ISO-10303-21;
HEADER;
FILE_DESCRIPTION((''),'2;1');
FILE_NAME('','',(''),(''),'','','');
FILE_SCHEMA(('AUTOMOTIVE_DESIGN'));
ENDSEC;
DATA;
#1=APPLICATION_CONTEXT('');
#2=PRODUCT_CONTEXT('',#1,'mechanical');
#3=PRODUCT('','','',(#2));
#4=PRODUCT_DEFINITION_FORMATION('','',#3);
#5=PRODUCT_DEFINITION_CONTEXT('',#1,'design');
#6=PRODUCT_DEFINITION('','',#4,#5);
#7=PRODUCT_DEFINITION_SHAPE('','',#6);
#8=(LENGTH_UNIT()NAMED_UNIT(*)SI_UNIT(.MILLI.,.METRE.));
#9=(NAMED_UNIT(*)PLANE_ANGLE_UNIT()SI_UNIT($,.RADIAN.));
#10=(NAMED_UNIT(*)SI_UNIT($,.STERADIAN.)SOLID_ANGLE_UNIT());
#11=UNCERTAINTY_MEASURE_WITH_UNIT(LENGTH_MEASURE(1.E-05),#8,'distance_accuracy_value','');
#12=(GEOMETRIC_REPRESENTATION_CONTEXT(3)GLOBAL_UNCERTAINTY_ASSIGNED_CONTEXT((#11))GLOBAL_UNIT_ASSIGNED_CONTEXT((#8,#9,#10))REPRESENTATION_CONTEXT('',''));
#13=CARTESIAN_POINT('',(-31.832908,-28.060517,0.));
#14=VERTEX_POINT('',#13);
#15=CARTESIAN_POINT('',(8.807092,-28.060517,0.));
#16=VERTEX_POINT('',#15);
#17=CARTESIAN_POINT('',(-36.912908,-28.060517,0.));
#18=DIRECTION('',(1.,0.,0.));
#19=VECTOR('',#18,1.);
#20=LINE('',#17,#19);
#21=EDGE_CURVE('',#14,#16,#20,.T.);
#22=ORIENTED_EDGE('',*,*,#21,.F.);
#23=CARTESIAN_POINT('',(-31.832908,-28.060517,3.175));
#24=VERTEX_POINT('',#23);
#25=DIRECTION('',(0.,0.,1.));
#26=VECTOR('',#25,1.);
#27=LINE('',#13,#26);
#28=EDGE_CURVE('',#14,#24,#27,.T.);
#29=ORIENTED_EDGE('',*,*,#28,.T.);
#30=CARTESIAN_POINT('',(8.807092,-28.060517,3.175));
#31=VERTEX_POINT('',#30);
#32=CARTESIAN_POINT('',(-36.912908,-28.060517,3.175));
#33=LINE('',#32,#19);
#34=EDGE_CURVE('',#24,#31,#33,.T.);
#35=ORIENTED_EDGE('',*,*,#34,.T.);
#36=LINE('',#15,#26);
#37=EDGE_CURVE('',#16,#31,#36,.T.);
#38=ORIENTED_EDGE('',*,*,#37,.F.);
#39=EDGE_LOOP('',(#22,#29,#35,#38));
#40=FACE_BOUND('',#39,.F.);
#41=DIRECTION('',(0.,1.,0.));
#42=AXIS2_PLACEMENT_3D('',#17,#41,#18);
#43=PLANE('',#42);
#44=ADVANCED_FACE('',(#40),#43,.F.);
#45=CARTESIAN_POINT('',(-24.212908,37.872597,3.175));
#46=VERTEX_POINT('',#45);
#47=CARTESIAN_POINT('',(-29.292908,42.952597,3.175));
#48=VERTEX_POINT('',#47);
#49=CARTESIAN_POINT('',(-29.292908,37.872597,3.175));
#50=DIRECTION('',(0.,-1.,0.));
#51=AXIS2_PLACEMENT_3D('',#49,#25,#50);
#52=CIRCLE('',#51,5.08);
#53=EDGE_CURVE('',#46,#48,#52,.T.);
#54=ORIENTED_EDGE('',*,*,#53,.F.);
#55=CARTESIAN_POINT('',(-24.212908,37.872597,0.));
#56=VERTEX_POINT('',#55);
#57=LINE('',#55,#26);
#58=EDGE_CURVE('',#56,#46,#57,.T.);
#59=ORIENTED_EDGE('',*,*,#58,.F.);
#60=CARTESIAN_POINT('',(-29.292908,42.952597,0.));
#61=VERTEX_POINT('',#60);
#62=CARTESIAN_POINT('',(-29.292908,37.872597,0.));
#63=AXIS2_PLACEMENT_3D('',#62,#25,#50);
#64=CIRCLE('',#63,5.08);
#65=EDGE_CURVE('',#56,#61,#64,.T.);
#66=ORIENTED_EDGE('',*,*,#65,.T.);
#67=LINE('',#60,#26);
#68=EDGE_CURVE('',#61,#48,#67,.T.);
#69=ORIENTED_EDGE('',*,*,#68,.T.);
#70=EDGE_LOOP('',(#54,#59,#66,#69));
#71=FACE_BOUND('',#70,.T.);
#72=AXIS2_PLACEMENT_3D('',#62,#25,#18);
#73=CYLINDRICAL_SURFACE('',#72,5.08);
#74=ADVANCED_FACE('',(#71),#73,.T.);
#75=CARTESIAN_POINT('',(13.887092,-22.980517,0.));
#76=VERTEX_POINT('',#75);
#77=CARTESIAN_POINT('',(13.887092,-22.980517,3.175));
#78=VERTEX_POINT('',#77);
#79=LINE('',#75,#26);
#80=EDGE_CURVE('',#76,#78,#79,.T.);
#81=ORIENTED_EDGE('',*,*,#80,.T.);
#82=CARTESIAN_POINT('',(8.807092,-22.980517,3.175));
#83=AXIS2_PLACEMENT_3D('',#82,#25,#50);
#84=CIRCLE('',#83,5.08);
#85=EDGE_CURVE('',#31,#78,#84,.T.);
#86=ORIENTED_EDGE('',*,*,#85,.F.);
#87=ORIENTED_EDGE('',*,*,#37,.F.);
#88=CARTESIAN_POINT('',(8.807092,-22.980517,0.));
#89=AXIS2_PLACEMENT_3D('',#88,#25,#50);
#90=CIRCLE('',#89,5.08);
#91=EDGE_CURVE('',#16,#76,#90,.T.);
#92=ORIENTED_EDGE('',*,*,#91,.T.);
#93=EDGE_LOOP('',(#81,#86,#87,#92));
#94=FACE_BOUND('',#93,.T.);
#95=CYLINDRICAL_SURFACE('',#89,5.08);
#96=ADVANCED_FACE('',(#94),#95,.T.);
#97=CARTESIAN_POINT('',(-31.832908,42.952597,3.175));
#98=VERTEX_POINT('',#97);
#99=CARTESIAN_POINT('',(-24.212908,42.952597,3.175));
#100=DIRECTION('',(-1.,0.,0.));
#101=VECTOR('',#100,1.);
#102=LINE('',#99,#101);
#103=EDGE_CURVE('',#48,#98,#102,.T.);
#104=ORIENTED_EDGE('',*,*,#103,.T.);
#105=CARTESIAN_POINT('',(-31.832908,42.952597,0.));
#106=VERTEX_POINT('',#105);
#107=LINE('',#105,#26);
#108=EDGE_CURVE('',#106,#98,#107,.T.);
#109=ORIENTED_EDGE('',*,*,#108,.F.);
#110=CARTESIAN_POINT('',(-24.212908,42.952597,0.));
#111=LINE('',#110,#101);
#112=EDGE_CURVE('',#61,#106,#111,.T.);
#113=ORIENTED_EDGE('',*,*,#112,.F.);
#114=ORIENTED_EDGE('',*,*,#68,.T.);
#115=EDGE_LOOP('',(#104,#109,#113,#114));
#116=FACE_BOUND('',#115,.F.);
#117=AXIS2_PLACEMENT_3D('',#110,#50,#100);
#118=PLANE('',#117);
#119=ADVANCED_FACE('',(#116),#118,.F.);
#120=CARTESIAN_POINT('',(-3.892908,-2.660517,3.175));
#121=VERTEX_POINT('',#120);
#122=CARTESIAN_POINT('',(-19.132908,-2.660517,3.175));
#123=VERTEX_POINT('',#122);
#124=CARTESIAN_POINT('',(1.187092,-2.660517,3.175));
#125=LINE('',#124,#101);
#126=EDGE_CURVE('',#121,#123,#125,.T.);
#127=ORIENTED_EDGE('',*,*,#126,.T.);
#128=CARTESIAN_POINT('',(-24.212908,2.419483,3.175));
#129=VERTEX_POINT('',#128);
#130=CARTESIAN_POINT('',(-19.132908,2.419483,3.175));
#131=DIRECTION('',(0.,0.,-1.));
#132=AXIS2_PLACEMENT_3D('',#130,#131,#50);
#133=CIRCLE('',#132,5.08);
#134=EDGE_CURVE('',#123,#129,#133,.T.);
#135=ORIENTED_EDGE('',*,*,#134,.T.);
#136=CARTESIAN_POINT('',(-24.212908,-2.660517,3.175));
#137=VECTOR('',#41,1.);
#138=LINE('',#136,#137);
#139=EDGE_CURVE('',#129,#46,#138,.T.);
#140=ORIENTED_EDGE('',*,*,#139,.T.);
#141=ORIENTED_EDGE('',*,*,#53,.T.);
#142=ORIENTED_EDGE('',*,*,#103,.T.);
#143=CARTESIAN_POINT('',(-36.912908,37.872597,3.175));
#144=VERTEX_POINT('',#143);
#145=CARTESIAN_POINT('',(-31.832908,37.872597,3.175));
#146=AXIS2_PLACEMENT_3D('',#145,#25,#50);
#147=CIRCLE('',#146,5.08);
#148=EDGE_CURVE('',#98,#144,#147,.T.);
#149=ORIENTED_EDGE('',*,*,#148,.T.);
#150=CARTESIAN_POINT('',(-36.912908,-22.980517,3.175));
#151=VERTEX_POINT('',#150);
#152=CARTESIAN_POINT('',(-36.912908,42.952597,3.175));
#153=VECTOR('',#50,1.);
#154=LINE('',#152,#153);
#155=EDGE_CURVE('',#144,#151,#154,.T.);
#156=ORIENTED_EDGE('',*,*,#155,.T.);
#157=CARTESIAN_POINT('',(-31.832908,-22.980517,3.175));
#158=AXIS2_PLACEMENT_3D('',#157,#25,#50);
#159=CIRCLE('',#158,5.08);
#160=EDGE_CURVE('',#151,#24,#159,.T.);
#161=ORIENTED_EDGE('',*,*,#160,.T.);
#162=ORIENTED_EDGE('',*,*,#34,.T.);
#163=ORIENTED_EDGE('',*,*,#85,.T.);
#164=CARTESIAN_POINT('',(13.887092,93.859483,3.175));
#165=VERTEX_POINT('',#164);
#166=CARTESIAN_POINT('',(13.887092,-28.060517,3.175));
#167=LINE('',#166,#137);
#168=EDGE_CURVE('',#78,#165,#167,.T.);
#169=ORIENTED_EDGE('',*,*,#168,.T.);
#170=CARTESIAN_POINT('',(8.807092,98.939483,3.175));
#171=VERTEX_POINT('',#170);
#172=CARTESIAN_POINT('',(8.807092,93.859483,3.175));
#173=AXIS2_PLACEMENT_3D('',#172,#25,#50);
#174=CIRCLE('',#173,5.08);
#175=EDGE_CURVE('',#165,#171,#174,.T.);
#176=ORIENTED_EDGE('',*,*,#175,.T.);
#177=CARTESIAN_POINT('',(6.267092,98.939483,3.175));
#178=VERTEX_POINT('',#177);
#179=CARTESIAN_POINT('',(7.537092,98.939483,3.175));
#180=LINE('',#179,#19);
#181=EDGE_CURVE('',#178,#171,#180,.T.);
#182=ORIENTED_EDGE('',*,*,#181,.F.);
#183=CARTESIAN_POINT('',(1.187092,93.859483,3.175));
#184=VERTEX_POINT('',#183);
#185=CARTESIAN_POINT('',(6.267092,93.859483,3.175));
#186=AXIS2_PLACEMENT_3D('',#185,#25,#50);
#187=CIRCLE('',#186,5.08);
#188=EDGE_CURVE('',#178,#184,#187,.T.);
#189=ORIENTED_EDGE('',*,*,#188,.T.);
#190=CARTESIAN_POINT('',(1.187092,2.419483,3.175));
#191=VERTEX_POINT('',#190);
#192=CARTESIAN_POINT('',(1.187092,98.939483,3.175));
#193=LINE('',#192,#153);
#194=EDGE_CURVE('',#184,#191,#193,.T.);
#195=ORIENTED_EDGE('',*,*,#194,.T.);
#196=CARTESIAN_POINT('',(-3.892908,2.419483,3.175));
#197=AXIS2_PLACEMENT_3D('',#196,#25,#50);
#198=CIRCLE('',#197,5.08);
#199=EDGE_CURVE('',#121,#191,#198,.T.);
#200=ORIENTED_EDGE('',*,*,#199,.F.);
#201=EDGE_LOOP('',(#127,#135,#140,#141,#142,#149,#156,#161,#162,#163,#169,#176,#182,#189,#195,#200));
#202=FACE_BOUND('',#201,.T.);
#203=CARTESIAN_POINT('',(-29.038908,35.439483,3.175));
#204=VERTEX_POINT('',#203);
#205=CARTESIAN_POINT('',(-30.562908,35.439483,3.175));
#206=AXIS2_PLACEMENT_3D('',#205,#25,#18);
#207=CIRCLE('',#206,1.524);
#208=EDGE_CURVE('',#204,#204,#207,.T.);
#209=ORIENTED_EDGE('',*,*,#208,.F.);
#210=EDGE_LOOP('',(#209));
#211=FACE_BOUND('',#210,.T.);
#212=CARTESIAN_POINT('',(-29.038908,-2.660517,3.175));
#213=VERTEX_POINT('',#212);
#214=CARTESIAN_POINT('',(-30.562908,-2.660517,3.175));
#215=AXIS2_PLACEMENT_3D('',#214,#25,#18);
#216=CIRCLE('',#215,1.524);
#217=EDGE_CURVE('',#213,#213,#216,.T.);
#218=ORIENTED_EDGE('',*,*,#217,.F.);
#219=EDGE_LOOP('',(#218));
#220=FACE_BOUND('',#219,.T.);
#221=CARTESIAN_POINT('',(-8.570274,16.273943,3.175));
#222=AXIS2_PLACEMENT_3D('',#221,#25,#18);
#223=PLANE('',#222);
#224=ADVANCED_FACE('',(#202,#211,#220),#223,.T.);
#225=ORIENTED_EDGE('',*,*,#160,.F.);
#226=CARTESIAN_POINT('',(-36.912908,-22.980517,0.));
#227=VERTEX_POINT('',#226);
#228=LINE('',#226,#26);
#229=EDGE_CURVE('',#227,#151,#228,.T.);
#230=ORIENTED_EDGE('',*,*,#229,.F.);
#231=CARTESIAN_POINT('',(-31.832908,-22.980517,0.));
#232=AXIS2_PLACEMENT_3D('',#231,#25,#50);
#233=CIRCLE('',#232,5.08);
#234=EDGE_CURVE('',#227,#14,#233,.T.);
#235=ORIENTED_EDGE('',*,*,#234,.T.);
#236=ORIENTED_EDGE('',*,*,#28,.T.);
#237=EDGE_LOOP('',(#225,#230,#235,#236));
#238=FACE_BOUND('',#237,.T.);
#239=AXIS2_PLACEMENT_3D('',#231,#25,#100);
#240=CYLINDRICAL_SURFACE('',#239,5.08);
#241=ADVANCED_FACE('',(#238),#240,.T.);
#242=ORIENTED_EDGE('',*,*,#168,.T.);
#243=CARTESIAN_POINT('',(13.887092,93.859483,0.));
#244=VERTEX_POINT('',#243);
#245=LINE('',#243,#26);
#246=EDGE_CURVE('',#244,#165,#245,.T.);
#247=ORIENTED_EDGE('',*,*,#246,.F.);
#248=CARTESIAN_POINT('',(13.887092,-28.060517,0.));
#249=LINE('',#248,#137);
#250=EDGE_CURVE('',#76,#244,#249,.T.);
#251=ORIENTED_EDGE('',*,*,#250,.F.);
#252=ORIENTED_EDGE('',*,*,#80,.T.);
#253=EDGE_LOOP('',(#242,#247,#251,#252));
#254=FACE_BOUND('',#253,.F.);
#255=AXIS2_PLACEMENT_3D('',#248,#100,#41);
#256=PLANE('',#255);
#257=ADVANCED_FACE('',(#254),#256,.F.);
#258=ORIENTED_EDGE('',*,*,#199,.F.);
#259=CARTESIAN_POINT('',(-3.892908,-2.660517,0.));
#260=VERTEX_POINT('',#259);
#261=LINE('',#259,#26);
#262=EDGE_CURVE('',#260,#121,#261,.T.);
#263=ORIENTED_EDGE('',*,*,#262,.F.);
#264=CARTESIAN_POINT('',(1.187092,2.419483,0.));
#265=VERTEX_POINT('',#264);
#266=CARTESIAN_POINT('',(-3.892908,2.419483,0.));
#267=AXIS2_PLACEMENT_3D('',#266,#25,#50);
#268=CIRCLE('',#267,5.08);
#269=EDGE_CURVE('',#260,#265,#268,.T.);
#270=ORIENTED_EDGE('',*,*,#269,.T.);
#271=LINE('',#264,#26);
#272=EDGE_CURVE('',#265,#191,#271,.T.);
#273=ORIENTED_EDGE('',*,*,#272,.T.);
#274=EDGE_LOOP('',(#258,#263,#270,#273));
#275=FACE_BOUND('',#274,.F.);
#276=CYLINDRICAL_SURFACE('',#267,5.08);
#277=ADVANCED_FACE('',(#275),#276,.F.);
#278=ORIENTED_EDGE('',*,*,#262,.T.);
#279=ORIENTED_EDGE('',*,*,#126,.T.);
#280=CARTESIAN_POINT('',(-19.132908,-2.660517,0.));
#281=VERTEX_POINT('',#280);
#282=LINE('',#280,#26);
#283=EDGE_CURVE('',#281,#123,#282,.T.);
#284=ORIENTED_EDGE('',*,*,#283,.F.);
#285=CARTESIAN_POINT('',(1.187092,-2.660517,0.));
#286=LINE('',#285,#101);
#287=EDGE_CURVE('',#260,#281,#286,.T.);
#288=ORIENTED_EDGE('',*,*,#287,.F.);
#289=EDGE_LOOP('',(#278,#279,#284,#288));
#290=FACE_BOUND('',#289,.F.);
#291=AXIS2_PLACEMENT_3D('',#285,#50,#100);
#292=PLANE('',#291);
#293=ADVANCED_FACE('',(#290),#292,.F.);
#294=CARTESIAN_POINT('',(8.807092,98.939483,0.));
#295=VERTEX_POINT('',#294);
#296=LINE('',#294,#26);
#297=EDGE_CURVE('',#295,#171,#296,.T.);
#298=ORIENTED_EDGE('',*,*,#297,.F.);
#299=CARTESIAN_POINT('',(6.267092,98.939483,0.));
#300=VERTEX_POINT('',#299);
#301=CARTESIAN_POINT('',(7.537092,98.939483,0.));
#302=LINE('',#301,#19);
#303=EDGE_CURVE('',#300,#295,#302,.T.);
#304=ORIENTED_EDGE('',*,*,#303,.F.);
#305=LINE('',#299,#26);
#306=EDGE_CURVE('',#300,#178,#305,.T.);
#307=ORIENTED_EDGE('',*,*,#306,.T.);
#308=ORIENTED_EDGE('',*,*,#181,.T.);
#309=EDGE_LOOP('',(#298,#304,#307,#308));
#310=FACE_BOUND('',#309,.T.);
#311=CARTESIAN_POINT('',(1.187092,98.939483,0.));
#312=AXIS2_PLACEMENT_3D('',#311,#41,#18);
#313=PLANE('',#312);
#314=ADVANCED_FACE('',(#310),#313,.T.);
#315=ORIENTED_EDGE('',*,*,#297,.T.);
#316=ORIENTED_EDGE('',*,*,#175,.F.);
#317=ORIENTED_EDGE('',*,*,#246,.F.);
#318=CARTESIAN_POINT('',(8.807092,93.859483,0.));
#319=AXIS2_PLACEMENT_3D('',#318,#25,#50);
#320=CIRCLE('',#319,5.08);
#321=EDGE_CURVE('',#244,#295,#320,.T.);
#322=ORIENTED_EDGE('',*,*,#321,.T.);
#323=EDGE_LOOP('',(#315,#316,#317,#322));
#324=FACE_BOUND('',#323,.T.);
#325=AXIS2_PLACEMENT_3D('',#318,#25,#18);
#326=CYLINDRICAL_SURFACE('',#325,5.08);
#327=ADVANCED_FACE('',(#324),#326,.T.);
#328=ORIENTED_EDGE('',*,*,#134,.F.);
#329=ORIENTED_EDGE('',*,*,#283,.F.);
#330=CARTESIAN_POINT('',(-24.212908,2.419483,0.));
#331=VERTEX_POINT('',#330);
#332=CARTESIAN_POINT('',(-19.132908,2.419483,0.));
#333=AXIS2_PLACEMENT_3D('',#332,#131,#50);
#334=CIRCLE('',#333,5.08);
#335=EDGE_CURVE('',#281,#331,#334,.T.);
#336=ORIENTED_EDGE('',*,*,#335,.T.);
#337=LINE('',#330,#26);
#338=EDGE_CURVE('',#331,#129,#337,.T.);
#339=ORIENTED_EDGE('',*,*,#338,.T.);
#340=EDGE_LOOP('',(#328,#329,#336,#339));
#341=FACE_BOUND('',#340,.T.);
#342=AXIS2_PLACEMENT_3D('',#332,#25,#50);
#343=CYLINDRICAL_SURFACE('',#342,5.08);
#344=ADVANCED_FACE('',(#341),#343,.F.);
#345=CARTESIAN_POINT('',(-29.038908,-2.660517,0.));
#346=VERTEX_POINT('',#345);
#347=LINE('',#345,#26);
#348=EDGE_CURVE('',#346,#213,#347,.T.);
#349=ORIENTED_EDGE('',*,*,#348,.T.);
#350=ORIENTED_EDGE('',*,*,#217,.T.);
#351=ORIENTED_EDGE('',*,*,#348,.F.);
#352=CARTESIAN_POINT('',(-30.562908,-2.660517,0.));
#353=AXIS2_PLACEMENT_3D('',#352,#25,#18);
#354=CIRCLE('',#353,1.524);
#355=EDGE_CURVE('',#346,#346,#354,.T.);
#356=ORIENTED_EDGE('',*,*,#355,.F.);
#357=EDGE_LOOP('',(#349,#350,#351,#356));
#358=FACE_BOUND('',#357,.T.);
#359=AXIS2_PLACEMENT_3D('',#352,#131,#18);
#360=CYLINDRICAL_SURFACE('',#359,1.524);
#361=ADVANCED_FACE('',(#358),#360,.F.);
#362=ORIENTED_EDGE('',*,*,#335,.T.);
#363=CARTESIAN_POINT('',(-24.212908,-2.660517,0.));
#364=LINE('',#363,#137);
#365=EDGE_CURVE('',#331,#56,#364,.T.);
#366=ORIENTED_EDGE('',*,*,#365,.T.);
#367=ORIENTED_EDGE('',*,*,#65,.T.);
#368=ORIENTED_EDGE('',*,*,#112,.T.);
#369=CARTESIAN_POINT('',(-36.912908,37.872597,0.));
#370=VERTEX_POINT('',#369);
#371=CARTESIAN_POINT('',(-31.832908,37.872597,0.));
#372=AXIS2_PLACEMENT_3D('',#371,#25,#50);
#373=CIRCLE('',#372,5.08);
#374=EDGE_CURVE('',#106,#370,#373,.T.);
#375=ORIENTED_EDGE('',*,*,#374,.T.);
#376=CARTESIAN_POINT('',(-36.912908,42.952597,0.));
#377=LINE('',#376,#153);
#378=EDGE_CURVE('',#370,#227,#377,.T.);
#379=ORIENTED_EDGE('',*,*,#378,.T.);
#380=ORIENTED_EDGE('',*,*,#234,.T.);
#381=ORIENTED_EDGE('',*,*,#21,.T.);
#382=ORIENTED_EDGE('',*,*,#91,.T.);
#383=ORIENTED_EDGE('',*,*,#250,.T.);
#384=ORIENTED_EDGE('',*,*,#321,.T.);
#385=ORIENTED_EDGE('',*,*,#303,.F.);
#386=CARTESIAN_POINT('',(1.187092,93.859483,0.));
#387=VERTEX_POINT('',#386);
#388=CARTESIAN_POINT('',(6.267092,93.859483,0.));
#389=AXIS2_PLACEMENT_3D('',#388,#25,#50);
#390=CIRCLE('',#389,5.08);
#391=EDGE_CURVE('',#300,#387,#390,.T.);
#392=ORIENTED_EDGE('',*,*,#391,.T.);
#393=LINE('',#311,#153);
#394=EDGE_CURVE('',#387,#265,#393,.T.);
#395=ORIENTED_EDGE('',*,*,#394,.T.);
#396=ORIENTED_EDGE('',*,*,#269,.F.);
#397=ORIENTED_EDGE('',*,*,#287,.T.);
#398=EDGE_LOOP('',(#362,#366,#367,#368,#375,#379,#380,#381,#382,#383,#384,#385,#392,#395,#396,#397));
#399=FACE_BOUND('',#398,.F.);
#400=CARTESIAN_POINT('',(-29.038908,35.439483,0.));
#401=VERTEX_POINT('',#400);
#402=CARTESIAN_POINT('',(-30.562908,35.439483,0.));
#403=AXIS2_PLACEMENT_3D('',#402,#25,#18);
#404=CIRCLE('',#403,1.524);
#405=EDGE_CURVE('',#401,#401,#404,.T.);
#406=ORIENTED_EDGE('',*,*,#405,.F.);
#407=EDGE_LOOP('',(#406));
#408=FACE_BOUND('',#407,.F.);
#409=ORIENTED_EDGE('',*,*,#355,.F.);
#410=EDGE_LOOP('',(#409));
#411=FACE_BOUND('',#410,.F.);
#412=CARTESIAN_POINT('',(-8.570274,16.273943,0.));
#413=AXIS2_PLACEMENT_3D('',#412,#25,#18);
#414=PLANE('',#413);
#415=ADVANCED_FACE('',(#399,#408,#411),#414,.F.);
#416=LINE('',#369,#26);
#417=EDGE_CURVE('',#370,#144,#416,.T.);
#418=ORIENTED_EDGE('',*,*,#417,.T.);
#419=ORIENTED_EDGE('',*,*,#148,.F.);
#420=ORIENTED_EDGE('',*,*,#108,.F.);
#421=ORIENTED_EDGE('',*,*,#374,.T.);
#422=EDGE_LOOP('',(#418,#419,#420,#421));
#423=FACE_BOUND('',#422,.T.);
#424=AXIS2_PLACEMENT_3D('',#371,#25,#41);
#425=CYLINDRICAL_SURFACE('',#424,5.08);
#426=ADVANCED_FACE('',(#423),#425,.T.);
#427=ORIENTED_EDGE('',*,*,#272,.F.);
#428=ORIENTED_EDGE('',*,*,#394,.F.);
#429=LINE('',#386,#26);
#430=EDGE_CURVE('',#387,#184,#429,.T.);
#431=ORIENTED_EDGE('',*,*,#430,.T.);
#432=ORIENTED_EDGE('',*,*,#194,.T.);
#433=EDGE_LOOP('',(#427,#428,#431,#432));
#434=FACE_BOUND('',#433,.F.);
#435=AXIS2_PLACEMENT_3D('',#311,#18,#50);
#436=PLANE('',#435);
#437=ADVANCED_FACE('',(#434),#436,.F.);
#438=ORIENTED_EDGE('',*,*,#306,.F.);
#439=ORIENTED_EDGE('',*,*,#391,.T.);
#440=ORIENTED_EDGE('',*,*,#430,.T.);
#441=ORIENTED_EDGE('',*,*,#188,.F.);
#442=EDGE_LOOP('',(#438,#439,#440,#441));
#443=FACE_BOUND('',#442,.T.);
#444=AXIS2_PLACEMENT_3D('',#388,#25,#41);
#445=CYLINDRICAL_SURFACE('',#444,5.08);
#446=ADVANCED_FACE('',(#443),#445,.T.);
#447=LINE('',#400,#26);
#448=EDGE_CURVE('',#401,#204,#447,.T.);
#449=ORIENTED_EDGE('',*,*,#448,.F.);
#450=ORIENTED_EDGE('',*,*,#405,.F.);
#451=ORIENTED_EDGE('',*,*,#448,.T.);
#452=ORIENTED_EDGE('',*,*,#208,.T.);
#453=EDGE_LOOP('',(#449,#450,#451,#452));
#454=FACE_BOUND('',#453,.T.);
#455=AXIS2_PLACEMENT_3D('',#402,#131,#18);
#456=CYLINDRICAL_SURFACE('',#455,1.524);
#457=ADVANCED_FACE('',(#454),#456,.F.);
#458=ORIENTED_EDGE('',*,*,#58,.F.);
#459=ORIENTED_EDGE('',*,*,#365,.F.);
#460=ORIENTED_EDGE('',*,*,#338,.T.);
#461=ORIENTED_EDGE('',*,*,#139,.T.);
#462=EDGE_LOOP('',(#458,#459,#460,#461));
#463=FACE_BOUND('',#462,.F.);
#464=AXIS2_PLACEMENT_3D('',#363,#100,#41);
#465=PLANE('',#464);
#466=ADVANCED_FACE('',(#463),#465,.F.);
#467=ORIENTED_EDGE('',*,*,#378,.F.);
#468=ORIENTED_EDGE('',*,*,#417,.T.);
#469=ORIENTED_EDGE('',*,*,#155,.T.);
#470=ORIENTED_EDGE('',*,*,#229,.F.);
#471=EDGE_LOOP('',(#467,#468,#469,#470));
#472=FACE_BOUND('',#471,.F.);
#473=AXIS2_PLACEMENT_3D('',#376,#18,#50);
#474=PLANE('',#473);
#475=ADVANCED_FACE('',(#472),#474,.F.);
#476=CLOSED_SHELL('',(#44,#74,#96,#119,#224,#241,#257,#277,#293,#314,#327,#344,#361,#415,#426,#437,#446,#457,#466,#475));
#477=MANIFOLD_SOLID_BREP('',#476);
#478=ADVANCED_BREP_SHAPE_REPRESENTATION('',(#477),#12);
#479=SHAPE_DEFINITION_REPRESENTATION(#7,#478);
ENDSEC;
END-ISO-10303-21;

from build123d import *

# Parameters (mm, degrees)
F0_R     = 1.524
F0_W     = 12.7
F0_H     = 25.4
F1_DEPTH = 3.175
F2_R     = 5.08


with BuildPart() as f1:
    # F0 (on Top) → F1 (new body)
    with BuildSketch(Plane.XY):
        Polygon((1.1870916933, -2.6605168543), (-24.2129083067, -2.6605168543), (-24.2129083067, 42.9525971413), (-36.9129083067, 42.9525971413), (-36.9129083067, -2.6605168543), (-36.9129083067, -12.0184096301), (-36.9129083067, -28.0605168543), (13.8870916933, -28.0605168543), (13.8870916933, -12.0184096301), (13.8870916933, -2.6605168543), (13.8870916933, 73.5394831457), (1.1870916933, 73.5394831457), align=None)
        with Locations((-30.5629083067, -2.6605168543)):
            Circle(F0_R, mode=Mode.SUBTRACT)
        with Locations((-30.5629083067, 35.4394831457)):
            Circle(F0_R, mode=Mode.SUBTRACT)
        with Locations((7.5370916933, 86.2394831457)):
            Rectangle(F0_W, F0_H)
    extrude(amount=F1_DEPTH)

    # F2
    f2_edges = [f1.edges().sort_by_distance(p)[0] for p in [
        (-36.912908, 42.952597, 1.5875),
        (1.187092, -2.660517, 1.5875),
        (-36.912908, -28.060517, 1.5875),
        (13.887092, -28.060517, 1.5875),
        (-24.212908, -2.660517, 1.5875),
        (1.187092, 98.939483, 1.5875),
        (13.887092, 98.939483, 1.5875),
        (-24.212908, 42.952597, 1.5875),
    ]]
    fillet(f2_edges, radius=F2_R)


solid = f1.part
